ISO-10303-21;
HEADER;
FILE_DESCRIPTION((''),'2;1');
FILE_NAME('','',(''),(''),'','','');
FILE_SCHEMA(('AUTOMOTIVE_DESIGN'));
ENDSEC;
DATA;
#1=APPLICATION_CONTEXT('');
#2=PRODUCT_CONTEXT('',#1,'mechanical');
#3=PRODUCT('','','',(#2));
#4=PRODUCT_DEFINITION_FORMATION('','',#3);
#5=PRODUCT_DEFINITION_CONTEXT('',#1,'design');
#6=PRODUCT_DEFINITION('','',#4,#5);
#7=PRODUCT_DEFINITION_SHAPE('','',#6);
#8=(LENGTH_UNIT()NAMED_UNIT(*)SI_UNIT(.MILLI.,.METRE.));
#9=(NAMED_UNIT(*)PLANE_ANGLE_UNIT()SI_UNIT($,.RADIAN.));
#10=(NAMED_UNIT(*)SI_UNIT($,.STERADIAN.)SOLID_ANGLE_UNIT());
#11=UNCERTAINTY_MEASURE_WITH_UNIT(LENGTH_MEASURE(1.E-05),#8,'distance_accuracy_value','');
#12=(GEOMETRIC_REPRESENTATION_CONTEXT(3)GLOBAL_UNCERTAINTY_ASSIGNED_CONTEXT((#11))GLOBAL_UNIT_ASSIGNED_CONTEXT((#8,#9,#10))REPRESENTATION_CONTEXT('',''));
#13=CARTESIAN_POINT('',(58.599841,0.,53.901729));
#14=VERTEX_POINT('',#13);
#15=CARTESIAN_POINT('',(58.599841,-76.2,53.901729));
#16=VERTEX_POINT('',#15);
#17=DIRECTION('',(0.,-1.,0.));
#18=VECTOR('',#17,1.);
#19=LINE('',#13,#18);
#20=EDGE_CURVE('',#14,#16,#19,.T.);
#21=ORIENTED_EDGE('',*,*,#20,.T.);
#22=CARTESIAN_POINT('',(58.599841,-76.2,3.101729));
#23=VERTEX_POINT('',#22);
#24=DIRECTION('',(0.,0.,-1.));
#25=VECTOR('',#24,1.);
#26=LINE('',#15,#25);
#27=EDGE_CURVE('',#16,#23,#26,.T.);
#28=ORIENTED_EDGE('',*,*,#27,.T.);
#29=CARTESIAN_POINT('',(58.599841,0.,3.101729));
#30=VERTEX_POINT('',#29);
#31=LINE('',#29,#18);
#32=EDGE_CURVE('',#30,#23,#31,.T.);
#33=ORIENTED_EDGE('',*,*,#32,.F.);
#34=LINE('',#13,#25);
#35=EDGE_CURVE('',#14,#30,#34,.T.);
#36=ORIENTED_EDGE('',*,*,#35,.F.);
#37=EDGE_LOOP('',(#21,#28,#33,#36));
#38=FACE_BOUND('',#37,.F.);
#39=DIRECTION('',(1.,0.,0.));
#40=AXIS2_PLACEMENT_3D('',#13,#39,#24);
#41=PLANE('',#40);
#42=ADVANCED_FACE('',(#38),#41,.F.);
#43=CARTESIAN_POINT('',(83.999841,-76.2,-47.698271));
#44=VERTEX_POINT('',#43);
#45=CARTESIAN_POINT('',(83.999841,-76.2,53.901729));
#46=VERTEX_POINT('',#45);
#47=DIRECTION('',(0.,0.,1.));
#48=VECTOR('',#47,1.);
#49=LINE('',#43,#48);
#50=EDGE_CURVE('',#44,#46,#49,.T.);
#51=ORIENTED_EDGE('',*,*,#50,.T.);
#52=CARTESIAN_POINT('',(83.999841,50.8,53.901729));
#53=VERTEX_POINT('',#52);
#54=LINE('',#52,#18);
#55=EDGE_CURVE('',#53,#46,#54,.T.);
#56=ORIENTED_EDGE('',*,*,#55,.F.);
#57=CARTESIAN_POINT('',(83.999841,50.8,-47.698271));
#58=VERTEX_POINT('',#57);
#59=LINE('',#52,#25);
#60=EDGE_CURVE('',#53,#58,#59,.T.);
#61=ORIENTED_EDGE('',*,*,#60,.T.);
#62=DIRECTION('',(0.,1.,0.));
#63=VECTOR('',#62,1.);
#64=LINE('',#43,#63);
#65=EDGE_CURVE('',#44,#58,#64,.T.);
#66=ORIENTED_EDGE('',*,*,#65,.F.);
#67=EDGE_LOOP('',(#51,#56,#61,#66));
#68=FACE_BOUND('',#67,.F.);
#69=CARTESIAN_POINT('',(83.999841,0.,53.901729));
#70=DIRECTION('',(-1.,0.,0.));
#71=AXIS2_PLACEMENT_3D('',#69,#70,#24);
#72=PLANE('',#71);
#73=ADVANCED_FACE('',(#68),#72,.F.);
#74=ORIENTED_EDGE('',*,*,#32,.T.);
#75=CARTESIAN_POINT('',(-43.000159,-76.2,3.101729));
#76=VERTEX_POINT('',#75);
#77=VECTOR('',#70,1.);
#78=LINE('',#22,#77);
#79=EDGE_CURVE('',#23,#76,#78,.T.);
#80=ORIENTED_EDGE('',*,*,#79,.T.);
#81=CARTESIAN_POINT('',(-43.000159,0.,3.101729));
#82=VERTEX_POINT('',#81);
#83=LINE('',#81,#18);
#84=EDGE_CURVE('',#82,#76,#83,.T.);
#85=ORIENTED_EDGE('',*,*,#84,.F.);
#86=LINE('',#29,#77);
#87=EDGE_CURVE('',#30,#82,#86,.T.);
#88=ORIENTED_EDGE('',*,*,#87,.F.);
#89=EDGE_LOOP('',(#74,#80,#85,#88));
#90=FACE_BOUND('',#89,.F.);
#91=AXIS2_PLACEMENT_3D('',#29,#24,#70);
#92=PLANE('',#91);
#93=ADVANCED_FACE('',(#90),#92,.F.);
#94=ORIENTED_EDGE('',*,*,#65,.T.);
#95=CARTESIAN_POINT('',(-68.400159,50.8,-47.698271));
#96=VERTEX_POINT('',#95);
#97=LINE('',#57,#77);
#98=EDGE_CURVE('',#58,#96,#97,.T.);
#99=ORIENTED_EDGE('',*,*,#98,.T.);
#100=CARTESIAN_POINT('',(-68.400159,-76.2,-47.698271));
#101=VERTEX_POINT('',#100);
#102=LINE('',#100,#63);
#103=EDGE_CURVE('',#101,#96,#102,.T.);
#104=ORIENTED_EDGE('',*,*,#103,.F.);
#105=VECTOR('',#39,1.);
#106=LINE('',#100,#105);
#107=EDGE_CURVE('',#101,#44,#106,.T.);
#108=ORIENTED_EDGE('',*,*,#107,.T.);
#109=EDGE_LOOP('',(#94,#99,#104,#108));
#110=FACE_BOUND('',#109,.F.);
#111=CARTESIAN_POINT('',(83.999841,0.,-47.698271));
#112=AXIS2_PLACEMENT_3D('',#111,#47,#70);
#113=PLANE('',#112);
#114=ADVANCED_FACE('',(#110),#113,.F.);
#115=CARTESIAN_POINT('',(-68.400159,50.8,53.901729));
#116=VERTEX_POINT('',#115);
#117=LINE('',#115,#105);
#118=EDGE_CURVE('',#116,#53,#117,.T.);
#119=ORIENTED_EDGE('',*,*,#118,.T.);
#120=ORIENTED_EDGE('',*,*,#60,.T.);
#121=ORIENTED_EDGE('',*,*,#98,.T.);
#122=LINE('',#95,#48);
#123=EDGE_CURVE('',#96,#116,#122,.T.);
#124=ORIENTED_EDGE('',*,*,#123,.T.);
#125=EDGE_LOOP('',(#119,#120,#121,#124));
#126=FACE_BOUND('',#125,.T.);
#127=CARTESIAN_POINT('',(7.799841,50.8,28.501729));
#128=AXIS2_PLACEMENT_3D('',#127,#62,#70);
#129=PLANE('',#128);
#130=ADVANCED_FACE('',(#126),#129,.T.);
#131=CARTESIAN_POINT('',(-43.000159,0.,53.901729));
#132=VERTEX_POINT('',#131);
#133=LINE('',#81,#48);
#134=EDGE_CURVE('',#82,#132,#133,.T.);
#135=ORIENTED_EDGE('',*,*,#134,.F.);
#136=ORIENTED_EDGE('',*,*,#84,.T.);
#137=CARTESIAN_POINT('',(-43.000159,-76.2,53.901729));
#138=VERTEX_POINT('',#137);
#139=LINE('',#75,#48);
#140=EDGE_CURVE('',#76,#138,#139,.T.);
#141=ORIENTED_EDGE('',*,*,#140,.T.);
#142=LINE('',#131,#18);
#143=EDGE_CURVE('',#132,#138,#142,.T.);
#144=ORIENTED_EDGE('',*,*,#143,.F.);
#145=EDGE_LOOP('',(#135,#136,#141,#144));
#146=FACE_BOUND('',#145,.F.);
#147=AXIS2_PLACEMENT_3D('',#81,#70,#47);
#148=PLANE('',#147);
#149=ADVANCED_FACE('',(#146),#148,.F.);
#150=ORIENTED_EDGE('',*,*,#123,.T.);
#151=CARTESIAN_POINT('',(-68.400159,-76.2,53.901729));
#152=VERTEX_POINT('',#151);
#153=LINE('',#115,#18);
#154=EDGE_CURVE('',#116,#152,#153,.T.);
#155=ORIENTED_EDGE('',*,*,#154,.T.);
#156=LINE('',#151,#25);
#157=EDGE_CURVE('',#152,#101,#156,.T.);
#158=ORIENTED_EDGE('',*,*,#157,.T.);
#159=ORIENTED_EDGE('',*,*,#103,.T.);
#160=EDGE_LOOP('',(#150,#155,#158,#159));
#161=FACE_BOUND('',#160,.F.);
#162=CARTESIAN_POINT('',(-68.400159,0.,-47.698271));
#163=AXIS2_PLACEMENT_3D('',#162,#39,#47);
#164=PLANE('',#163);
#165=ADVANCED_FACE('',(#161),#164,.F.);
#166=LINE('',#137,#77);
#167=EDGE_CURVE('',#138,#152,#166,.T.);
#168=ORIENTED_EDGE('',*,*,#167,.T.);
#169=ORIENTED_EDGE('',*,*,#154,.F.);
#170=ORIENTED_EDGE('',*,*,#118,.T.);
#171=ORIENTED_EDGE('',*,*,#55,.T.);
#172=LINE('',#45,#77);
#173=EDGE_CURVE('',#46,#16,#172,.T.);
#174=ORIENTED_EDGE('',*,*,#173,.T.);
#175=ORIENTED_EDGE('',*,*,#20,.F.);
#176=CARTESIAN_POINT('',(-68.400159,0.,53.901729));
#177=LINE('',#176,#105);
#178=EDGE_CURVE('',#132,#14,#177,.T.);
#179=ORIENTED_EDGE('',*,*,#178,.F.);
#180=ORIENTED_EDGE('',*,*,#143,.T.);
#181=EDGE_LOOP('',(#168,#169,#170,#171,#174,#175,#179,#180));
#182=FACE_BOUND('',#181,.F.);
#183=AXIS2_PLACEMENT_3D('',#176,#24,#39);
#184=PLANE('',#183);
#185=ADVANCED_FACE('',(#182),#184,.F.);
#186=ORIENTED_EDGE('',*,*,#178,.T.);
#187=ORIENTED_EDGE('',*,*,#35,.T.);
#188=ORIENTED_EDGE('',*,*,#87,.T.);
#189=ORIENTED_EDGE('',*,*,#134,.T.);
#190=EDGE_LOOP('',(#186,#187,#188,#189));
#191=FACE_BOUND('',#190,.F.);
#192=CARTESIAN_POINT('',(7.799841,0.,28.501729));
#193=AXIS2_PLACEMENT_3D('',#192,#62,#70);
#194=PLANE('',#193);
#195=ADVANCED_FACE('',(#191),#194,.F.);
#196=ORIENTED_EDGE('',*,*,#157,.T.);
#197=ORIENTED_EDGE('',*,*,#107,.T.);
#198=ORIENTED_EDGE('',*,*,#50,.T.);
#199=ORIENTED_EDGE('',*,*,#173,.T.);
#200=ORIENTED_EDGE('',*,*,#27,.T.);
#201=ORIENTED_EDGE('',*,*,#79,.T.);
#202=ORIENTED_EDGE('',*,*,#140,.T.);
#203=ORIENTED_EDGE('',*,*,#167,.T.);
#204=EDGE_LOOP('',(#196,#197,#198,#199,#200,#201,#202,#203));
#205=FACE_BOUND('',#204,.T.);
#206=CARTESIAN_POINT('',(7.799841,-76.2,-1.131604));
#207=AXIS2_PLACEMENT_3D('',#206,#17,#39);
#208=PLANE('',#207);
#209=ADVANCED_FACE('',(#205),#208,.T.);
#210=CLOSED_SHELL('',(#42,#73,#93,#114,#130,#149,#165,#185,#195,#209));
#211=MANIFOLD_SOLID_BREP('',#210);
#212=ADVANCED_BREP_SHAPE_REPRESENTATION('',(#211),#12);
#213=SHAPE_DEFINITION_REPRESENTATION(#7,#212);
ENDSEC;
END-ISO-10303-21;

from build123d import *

# Parameters (mm, degrees)
F1_DEPTH = 76.2
F2_W     = 101.6
F2_H     = 50.8
F3_DEPTH = 50.8


with BuildPart() as f1:
    # F0 (on Front) → F1 (new body)
    with BuildSketch(Plane.XZ):
        Polygon((-68.4001594782, 53.9017294705), (-68.4001594782, -47.6982705295), (83.9998405218, -47.6982705295), (83.9998405218, 53.9017294705), (58.5998405218, 53.9017294705), (58.5998405218, 3.1017294705), (-43.0001594782, 3.1017294705), (-43.0001594782, 53.9017294705), align=None)
    extrude(amount=F1_DEPTH)

    # F2 (on face) → F3 (join)
    with BuildSketch(Plane(origin=(0, 0, 0), x_dir=(-1, 0, 0), z_dir=(0, 1, 0))):
        with Locations((-7.7998405218, 28.5017294705)):
            Rectangle(F2_W, F2_H)
        Polygon((-58.5998405218, 53.9017294705), (-83.9998405218, 53.9017294705), (-83.9998405218, -47.6982705295), (68.4001594782, -47.6982705295), (68.4001594782, 53.9017294705), (43.0001594782, 53.9017294705), (43.0001594782, 3.1017294705), (-58.5998405218, 3.1017294705), align=None)
    extrude(amount=F3_DEPTH)


solid = f1.part
